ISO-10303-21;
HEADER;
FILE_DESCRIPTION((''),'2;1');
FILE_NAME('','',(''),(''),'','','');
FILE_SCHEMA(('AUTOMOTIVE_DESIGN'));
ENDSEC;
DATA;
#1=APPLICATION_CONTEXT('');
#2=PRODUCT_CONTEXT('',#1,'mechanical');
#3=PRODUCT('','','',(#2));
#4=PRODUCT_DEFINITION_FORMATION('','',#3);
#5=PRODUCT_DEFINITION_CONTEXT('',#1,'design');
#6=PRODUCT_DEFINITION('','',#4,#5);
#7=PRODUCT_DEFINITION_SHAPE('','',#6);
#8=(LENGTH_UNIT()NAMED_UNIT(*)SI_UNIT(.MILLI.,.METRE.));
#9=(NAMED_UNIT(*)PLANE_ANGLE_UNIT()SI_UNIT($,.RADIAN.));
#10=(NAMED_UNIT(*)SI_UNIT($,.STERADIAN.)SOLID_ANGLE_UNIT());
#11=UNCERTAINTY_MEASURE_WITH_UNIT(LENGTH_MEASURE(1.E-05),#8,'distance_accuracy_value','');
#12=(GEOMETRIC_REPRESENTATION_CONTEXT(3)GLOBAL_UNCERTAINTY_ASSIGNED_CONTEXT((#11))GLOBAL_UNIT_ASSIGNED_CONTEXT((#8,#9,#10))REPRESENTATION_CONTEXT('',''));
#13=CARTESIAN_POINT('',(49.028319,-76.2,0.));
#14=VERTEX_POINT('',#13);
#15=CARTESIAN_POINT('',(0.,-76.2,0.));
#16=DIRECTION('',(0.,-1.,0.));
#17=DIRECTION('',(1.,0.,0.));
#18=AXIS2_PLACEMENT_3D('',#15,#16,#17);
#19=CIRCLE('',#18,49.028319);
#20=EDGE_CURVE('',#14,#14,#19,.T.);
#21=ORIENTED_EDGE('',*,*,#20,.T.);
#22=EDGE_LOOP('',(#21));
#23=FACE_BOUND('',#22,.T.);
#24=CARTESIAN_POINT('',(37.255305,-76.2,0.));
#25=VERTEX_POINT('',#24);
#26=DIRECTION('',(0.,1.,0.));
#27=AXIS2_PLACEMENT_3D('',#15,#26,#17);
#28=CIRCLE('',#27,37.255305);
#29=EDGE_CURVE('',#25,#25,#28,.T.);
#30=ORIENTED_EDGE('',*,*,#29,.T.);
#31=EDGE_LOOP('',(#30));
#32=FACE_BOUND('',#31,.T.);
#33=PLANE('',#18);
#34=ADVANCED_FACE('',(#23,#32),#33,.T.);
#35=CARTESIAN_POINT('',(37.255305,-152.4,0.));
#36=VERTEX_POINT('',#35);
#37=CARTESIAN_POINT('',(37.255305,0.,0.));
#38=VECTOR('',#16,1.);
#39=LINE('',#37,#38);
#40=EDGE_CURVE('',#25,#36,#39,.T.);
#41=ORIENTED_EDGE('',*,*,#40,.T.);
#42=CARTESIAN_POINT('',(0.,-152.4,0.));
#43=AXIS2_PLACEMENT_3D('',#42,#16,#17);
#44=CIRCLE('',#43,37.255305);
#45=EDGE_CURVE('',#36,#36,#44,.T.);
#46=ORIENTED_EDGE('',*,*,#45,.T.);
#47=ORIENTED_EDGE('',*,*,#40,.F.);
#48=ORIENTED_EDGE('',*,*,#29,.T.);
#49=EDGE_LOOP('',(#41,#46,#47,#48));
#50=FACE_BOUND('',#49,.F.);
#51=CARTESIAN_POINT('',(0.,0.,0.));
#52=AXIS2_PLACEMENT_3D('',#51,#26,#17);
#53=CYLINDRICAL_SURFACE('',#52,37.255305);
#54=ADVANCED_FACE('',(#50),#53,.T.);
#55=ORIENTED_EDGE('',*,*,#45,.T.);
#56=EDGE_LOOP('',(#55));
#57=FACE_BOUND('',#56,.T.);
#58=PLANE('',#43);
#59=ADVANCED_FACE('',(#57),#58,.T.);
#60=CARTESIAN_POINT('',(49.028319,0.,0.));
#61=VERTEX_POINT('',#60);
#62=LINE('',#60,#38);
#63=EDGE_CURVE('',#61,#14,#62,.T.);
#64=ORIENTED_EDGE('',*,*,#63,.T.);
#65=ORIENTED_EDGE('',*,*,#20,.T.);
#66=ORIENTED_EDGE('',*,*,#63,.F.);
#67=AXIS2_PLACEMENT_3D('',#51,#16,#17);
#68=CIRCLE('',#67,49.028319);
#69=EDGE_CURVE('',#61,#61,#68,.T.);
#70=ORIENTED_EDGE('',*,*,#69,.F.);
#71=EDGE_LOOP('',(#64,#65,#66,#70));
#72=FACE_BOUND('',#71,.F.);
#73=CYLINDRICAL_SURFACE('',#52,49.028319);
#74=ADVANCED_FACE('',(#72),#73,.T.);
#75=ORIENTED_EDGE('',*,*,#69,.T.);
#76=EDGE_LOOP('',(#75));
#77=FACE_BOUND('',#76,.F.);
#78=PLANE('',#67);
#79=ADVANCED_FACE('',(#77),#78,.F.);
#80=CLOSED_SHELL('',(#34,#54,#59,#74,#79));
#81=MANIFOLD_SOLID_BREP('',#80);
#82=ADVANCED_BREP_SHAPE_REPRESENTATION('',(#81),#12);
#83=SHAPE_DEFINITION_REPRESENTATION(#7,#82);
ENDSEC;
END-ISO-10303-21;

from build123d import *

# Parameters (mm, degrees)
F0_R     = 49.0283190444
F1_DEPTH = 76.2
F2_R     = 37.255304708
F3_DEPTH = 152.4
F4_R     = 23.611936081
F5_DEPTH = 273


# Not quite as in the source:
# - an extrude ends at something that could not be found from the text; its depth is read off the source's solid


with BuildPart() as f1:
    # F0 (on Front) → F1 (new body)
    with BuildSketch(Plane.XZ):
        Circle(F0_R)
    extrude(amount=F1_DEPTH)

    # F2 (on Front) → F3 (join)
    with BuildSketch(Plane.XZ):
        Circle(F2_R)
    extrude(amount=F3_DEPTH)

    # F4 (on Front) → F5 (cut, through all)
    with BuildSketch(Plane.XZ):
        Circle(F4_R)
    extrude(amount=-F5_DEPTH, mode=Mode.SUBTRACT)


solid = f1.part
